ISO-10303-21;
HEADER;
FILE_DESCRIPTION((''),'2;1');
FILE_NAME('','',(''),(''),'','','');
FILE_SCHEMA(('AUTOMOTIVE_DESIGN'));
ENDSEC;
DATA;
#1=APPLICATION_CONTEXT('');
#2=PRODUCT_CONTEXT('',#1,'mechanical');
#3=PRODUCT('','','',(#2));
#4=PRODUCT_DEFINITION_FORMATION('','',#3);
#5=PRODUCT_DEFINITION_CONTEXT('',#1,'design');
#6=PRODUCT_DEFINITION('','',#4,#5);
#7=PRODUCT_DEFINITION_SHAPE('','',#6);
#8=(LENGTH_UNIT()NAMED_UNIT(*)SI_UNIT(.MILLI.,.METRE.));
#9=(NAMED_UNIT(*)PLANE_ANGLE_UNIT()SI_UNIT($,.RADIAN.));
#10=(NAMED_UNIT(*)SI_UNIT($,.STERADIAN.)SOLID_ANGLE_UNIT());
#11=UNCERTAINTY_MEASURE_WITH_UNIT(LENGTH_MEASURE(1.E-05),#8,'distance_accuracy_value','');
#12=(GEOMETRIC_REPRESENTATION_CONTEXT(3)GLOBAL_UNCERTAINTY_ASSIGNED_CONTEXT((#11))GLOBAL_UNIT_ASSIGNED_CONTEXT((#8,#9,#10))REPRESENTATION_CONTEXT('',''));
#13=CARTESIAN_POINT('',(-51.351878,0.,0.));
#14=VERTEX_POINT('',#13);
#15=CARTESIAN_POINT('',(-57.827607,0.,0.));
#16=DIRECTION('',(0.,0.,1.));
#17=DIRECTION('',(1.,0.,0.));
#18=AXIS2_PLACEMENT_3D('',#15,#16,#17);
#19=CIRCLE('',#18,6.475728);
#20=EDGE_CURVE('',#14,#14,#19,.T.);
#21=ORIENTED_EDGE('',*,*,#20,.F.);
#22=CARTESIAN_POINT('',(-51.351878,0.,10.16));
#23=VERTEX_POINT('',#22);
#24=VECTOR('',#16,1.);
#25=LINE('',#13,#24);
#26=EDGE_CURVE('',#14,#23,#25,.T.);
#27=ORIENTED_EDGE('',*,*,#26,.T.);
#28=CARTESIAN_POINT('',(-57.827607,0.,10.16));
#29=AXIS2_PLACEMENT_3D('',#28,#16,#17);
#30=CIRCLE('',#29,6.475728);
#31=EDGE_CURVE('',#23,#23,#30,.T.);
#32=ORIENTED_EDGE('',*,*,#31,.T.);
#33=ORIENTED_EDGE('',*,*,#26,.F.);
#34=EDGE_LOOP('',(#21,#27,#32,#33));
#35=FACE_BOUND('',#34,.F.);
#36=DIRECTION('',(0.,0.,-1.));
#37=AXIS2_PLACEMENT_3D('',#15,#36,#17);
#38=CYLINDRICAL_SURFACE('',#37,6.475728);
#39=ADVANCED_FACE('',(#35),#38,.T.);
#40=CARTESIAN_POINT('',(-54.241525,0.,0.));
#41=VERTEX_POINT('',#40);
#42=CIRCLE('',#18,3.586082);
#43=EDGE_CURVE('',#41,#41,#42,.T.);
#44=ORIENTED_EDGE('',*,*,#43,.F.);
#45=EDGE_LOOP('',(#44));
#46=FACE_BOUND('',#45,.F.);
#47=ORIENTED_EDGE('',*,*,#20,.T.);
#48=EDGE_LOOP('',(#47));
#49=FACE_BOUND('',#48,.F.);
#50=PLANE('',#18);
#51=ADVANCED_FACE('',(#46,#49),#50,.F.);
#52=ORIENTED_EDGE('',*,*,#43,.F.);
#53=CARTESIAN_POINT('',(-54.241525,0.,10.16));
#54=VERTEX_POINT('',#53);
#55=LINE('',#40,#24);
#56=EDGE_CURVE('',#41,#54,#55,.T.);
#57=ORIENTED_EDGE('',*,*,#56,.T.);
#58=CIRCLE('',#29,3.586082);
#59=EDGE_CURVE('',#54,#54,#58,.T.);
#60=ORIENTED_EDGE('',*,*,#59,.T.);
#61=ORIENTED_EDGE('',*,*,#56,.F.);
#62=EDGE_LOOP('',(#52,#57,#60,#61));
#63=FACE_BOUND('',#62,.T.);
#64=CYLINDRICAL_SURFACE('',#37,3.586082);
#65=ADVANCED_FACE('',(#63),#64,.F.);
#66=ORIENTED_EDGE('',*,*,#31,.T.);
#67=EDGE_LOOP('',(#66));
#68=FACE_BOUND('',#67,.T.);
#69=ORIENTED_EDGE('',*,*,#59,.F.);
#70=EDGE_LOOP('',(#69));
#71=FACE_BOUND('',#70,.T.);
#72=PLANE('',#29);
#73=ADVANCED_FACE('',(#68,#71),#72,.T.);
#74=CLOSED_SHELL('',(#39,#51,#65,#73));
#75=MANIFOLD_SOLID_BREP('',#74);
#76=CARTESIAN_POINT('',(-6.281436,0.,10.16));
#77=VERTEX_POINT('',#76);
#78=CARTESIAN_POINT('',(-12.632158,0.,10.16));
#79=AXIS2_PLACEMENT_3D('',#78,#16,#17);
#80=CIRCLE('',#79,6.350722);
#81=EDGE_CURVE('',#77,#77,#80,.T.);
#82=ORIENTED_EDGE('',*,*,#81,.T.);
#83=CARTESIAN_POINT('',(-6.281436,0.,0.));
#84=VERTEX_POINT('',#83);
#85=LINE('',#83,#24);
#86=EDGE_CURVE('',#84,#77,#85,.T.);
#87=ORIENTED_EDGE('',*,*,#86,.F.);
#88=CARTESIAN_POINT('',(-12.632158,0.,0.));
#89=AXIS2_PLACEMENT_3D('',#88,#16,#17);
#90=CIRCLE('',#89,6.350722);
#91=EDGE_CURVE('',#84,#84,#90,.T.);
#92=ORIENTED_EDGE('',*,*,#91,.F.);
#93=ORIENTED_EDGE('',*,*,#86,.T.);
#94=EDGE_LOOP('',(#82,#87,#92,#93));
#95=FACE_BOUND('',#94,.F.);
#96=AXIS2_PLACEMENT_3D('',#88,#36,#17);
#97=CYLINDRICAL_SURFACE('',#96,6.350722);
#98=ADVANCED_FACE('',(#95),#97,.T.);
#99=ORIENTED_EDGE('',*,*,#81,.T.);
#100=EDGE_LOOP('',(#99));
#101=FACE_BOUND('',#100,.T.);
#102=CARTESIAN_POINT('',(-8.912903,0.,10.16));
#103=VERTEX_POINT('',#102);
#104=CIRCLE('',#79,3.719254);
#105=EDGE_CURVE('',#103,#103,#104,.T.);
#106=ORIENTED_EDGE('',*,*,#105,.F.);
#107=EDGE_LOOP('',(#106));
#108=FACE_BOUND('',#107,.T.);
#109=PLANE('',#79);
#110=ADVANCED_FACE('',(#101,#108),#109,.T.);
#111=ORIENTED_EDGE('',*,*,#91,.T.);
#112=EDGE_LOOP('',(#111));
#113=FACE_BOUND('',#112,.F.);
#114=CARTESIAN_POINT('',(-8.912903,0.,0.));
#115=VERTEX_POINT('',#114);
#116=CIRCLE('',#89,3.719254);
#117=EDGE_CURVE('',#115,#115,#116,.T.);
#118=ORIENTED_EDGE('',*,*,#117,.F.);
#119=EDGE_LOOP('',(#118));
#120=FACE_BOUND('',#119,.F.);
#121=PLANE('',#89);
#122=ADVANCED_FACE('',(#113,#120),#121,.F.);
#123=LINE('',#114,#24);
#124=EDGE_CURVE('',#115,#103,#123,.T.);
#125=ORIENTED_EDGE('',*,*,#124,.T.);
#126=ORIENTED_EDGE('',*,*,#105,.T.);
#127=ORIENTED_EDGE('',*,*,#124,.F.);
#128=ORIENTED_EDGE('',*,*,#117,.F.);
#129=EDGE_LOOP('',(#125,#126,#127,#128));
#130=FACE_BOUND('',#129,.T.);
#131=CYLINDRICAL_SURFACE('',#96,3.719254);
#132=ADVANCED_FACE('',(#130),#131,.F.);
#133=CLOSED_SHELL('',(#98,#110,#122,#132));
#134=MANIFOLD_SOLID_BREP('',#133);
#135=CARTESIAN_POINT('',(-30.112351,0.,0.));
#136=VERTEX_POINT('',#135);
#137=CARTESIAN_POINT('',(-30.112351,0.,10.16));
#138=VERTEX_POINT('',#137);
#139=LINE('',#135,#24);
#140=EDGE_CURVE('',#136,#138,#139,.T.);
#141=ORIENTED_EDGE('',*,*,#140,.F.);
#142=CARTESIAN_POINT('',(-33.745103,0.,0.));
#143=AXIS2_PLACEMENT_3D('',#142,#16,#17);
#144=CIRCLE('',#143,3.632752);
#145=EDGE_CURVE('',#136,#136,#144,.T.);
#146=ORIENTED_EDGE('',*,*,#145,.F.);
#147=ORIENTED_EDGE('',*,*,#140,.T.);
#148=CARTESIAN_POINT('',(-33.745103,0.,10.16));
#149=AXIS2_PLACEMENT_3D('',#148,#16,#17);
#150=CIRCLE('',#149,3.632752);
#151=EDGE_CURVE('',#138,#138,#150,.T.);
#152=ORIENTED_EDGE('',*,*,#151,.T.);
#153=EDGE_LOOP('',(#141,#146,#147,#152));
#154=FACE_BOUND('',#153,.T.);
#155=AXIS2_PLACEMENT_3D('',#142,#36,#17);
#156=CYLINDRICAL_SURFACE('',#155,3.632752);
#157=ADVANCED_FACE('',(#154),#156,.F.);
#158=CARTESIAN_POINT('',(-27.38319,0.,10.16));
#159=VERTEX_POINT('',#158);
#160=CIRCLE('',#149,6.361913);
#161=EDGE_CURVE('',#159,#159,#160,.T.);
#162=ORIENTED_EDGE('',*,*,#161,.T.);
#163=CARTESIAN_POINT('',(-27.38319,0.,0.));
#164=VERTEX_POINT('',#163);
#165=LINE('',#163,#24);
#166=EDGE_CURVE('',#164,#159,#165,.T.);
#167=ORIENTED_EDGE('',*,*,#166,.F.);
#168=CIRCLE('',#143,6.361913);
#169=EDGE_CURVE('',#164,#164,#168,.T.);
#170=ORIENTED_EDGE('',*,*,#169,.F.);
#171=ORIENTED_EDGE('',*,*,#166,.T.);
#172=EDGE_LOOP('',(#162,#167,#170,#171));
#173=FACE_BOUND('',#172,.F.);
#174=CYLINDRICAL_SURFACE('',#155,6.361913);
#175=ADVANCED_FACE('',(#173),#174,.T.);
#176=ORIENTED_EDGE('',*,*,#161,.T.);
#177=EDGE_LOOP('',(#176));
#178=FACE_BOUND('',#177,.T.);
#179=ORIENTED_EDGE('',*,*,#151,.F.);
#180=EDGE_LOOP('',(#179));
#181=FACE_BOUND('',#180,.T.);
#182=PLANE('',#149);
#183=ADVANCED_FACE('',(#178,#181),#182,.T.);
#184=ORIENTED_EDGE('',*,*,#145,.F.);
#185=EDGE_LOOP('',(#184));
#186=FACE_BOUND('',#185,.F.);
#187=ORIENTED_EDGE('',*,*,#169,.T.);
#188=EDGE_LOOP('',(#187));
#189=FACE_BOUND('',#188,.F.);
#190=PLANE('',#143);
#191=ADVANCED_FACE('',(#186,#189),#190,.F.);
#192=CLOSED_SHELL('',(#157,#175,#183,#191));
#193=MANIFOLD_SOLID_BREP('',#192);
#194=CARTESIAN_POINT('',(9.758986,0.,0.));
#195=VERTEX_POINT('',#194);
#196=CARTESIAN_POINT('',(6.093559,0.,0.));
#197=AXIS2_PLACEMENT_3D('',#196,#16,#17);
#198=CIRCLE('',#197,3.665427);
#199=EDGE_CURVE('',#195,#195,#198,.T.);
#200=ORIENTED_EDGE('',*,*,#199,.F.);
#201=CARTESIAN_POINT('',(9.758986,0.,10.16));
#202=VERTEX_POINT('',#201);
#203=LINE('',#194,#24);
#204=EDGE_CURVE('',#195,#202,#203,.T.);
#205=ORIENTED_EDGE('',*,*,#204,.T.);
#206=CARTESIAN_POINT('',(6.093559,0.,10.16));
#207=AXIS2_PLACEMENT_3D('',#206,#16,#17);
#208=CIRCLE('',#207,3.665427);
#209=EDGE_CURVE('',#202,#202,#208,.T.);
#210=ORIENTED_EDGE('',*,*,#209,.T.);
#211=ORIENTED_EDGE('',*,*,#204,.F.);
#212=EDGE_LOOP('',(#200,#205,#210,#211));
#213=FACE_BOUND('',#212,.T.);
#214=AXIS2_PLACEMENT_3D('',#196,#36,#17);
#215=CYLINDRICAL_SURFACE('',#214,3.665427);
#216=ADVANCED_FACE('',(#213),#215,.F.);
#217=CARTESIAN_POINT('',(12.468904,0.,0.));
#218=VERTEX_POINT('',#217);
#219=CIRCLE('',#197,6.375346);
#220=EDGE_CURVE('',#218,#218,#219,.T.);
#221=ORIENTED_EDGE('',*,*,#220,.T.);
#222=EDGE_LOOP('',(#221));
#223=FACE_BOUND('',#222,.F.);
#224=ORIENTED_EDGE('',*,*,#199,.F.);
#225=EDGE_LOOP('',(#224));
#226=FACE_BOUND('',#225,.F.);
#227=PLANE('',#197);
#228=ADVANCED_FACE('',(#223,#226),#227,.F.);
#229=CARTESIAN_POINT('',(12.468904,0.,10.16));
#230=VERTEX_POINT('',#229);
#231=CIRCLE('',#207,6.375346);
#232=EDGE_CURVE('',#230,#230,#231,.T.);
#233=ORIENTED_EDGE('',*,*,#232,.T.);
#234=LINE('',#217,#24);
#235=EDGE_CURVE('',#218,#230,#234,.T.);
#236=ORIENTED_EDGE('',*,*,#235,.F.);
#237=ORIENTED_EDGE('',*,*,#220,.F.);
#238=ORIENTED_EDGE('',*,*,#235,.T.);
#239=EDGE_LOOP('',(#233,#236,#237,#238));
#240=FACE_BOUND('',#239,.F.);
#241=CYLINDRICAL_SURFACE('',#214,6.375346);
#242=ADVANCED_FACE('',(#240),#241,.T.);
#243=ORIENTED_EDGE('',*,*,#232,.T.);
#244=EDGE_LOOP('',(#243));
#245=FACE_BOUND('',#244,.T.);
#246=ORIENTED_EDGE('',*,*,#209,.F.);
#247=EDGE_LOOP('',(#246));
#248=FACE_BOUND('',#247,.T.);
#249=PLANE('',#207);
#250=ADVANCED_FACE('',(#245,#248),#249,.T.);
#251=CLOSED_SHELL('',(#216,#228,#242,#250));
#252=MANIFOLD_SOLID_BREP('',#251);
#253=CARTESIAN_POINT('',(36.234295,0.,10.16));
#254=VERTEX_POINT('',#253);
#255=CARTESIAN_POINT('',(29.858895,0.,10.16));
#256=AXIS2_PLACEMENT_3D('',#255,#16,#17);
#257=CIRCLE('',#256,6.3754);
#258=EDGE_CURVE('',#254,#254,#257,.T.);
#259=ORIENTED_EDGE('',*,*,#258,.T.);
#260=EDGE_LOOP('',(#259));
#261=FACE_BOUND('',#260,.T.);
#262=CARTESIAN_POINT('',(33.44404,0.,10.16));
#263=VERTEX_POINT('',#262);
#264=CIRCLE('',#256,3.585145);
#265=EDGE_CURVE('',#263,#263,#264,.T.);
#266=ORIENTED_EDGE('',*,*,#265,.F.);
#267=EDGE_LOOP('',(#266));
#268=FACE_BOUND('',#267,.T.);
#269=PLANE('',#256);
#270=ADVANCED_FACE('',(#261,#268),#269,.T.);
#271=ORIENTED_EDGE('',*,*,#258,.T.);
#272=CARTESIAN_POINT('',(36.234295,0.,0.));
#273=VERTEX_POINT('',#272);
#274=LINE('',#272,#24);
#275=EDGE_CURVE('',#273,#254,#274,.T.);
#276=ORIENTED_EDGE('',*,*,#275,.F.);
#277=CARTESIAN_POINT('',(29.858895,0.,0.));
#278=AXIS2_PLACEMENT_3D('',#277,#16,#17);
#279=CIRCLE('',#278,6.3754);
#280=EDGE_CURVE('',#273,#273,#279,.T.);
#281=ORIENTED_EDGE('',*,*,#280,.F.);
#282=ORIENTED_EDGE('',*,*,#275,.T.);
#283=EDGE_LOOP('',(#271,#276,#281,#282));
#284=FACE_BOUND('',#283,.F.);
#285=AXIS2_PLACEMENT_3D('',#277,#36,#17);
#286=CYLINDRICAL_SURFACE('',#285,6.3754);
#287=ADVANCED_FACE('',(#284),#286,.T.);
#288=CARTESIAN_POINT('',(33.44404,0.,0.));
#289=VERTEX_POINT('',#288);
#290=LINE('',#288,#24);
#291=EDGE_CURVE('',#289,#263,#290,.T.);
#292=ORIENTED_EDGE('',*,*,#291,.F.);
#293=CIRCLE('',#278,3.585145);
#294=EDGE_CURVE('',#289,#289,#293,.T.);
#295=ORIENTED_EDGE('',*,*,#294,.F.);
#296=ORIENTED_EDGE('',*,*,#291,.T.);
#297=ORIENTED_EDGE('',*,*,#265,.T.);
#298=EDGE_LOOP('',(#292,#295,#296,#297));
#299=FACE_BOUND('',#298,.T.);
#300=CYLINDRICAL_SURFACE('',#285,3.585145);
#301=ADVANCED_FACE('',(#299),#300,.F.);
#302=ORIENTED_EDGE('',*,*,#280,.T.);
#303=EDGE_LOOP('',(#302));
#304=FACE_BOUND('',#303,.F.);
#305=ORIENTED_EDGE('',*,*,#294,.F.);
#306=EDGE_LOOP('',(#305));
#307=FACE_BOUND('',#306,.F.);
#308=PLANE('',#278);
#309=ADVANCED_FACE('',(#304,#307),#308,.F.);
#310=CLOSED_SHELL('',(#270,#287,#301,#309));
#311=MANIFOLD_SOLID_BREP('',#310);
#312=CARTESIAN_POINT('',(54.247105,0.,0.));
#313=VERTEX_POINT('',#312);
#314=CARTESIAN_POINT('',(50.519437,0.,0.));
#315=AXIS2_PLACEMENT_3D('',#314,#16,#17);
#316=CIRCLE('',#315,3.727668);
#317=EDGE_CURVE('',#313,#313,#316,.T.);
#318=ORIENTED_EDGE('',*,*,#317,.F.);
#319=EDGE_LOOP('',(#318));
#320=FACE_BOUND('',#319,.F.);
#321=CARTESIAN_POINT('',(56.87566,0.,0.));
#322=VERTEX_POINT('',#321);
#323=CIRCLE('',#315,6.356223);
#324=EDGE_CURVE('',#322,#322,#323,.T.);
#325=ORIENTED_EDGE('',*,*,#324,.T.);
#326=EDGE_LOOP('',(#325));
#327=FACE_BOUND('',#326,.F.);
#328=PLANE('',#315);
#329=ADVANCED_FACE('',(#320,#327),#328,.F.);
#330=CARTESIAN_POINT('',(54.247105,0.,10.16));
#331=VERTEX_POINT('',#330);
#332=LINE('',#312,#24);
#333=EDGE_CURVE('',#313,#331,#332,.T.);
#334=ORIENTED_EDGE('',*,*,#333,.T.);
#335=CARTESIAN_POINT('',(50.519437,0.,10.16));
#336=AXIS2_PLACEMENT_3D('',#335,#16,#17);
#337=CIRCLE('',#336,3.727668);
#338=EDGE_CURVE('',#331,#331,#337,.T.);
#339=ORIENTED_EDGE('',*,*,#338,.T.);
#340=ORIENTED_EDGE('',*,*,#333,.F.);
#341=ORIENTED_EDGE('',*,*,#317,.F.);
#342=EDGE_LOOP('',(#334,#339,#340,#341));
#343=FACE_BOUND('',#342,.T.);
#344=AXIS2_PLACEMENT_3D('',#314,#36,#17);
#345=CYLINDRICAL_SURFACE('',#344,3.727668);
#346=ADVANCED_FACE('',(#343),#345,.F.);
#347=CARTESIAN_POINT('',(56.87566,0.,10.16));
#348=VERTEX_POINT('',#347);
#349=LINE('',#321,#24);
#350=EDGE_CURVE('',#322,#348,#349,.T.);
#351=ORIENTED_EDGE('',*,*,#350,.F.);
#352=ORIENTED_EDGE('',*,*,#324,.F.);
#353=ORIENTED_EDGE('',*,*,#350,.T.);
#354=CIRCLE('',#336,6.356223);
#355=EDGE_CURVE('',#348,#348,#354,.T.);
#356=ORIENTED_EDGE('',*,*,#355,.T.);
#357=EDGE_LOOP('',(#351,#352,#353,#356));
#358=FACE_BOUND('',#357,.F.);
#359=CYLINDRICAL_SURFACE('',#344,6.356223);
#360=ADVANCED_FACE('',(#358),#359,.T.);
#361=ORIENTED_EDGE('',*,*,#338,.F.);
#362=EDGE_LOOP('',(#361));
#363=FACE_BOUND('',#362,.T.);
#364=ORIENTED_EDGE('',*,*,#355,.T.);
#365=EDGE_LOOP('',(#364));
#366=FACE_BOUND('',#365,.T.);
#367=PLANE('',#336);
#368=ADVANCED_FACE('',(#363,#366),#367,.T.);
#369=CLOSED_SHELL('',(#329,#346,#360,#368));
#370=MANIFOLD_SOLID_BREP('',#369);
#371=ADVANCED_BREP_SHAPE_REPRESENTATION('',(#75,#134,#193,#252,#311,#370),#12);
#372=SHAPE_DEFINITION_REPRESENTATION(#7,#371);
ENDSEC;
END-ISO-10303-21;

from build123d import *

# Parameters (mm, degrees)
F0_R     = 6.3507220603
F0_R_2   = 3.7192541637
F1_DEPTH = 10.16
F0_R_3   = 6.3619127216
F0_R_4   = 3.6327515113
F0_R_5   = 6.4757284785
F0_R_6   = 3.5860816938
F2_R     = 6.3562234289
F2_R_2   = 3.7276679296
F3_DEPTH = 10.16
F2_R_3   = 6.375345629
F2_R_4   = 3.6654269583
F2_R_5   = 6.3754
F2_R_6   = 3.5851449437


# Not quite as in the source:
# - a feature names something its author has since deleted; it is built from what else it names


with BuildPart() as f1:
    # F0 (on Top) → F1 (new body)
    with BuildSketch(Plane.XY):
        with Locations((-12.6321576536, 0)):
            Circle(F0_R)
        with Locations((-12.6321576536, 0)):
            Circle(F0_R_2, mode=Mode.SUBTRACT)
    extrude(amount=F1_DEPTH)


with BuildPart() as f1b:
    # F0 (on Top) → F1, piece 2 (new body)
    with BuildSketch(Plane.XY):
        with Locations((-33.7451025844, 0)):
            Circle(F0_R_3)
        with Locations((-33.7451025844, 0)):
            Circle(F0_R_4, mode=Mode.SUBTRACT)
    extrude(amount=F1_DEPTH)


with BuildPart() as f1c:
    # F0 (on Top) → F1, piece 3 (new body)
    with BuildSketch(Plane.XY):
        with Locations((-57.8276067972, 0)):
            Circle(F0_R_5)
        with Locations((-57.8276067972, 0)):
            Circle(F0_R_6, mode=Mode.SUBTRACT)
    extrude(amount=F1_DEPTH)


with BuildPart() as f3:
    # F2 (on Top) → F3 (new body)
    with BuildSketch(Plane.XY):
        with Locations((50.5194365978, 0)):
            Circle(F2_R)
        with Locations((50.5194365978, 0)):
            Circle(F2_R_2, mode=Mode.SUBTRACT)
    extrude(amount=F3_DEPTH)


with BuildPart() as f3b:
    # F2 (on Top) → F3, piece 2 (new body)
    with BuildSketch(Plane.XY):
        with Locations((6.093558742, 0)):
            Circle(F2_R_3)
        with Locations((6.093558742, 0)):
            Circle(F2_R_4, mode=Mode.SUBTRACT)
    extrude(amount=F3_DEPTH)


with BuildPart() as f3c:
    # F2 (on Top) → F3, piece 3 (new body)
    with BuildSketch(Plane.XY):
        with Locations((29.8588951446, 0)):
            Circle(F2_R_5)
        with Locations((29.8588951446, 0)):
            Circle(F2_R_6, mode=Mode.SUBTRACT)
    extrude(amount=F3_DEPTH)


solid = Compound([f1.part, f1b.part, f1c.part, f3.part, f3b.part, f3c.part])
